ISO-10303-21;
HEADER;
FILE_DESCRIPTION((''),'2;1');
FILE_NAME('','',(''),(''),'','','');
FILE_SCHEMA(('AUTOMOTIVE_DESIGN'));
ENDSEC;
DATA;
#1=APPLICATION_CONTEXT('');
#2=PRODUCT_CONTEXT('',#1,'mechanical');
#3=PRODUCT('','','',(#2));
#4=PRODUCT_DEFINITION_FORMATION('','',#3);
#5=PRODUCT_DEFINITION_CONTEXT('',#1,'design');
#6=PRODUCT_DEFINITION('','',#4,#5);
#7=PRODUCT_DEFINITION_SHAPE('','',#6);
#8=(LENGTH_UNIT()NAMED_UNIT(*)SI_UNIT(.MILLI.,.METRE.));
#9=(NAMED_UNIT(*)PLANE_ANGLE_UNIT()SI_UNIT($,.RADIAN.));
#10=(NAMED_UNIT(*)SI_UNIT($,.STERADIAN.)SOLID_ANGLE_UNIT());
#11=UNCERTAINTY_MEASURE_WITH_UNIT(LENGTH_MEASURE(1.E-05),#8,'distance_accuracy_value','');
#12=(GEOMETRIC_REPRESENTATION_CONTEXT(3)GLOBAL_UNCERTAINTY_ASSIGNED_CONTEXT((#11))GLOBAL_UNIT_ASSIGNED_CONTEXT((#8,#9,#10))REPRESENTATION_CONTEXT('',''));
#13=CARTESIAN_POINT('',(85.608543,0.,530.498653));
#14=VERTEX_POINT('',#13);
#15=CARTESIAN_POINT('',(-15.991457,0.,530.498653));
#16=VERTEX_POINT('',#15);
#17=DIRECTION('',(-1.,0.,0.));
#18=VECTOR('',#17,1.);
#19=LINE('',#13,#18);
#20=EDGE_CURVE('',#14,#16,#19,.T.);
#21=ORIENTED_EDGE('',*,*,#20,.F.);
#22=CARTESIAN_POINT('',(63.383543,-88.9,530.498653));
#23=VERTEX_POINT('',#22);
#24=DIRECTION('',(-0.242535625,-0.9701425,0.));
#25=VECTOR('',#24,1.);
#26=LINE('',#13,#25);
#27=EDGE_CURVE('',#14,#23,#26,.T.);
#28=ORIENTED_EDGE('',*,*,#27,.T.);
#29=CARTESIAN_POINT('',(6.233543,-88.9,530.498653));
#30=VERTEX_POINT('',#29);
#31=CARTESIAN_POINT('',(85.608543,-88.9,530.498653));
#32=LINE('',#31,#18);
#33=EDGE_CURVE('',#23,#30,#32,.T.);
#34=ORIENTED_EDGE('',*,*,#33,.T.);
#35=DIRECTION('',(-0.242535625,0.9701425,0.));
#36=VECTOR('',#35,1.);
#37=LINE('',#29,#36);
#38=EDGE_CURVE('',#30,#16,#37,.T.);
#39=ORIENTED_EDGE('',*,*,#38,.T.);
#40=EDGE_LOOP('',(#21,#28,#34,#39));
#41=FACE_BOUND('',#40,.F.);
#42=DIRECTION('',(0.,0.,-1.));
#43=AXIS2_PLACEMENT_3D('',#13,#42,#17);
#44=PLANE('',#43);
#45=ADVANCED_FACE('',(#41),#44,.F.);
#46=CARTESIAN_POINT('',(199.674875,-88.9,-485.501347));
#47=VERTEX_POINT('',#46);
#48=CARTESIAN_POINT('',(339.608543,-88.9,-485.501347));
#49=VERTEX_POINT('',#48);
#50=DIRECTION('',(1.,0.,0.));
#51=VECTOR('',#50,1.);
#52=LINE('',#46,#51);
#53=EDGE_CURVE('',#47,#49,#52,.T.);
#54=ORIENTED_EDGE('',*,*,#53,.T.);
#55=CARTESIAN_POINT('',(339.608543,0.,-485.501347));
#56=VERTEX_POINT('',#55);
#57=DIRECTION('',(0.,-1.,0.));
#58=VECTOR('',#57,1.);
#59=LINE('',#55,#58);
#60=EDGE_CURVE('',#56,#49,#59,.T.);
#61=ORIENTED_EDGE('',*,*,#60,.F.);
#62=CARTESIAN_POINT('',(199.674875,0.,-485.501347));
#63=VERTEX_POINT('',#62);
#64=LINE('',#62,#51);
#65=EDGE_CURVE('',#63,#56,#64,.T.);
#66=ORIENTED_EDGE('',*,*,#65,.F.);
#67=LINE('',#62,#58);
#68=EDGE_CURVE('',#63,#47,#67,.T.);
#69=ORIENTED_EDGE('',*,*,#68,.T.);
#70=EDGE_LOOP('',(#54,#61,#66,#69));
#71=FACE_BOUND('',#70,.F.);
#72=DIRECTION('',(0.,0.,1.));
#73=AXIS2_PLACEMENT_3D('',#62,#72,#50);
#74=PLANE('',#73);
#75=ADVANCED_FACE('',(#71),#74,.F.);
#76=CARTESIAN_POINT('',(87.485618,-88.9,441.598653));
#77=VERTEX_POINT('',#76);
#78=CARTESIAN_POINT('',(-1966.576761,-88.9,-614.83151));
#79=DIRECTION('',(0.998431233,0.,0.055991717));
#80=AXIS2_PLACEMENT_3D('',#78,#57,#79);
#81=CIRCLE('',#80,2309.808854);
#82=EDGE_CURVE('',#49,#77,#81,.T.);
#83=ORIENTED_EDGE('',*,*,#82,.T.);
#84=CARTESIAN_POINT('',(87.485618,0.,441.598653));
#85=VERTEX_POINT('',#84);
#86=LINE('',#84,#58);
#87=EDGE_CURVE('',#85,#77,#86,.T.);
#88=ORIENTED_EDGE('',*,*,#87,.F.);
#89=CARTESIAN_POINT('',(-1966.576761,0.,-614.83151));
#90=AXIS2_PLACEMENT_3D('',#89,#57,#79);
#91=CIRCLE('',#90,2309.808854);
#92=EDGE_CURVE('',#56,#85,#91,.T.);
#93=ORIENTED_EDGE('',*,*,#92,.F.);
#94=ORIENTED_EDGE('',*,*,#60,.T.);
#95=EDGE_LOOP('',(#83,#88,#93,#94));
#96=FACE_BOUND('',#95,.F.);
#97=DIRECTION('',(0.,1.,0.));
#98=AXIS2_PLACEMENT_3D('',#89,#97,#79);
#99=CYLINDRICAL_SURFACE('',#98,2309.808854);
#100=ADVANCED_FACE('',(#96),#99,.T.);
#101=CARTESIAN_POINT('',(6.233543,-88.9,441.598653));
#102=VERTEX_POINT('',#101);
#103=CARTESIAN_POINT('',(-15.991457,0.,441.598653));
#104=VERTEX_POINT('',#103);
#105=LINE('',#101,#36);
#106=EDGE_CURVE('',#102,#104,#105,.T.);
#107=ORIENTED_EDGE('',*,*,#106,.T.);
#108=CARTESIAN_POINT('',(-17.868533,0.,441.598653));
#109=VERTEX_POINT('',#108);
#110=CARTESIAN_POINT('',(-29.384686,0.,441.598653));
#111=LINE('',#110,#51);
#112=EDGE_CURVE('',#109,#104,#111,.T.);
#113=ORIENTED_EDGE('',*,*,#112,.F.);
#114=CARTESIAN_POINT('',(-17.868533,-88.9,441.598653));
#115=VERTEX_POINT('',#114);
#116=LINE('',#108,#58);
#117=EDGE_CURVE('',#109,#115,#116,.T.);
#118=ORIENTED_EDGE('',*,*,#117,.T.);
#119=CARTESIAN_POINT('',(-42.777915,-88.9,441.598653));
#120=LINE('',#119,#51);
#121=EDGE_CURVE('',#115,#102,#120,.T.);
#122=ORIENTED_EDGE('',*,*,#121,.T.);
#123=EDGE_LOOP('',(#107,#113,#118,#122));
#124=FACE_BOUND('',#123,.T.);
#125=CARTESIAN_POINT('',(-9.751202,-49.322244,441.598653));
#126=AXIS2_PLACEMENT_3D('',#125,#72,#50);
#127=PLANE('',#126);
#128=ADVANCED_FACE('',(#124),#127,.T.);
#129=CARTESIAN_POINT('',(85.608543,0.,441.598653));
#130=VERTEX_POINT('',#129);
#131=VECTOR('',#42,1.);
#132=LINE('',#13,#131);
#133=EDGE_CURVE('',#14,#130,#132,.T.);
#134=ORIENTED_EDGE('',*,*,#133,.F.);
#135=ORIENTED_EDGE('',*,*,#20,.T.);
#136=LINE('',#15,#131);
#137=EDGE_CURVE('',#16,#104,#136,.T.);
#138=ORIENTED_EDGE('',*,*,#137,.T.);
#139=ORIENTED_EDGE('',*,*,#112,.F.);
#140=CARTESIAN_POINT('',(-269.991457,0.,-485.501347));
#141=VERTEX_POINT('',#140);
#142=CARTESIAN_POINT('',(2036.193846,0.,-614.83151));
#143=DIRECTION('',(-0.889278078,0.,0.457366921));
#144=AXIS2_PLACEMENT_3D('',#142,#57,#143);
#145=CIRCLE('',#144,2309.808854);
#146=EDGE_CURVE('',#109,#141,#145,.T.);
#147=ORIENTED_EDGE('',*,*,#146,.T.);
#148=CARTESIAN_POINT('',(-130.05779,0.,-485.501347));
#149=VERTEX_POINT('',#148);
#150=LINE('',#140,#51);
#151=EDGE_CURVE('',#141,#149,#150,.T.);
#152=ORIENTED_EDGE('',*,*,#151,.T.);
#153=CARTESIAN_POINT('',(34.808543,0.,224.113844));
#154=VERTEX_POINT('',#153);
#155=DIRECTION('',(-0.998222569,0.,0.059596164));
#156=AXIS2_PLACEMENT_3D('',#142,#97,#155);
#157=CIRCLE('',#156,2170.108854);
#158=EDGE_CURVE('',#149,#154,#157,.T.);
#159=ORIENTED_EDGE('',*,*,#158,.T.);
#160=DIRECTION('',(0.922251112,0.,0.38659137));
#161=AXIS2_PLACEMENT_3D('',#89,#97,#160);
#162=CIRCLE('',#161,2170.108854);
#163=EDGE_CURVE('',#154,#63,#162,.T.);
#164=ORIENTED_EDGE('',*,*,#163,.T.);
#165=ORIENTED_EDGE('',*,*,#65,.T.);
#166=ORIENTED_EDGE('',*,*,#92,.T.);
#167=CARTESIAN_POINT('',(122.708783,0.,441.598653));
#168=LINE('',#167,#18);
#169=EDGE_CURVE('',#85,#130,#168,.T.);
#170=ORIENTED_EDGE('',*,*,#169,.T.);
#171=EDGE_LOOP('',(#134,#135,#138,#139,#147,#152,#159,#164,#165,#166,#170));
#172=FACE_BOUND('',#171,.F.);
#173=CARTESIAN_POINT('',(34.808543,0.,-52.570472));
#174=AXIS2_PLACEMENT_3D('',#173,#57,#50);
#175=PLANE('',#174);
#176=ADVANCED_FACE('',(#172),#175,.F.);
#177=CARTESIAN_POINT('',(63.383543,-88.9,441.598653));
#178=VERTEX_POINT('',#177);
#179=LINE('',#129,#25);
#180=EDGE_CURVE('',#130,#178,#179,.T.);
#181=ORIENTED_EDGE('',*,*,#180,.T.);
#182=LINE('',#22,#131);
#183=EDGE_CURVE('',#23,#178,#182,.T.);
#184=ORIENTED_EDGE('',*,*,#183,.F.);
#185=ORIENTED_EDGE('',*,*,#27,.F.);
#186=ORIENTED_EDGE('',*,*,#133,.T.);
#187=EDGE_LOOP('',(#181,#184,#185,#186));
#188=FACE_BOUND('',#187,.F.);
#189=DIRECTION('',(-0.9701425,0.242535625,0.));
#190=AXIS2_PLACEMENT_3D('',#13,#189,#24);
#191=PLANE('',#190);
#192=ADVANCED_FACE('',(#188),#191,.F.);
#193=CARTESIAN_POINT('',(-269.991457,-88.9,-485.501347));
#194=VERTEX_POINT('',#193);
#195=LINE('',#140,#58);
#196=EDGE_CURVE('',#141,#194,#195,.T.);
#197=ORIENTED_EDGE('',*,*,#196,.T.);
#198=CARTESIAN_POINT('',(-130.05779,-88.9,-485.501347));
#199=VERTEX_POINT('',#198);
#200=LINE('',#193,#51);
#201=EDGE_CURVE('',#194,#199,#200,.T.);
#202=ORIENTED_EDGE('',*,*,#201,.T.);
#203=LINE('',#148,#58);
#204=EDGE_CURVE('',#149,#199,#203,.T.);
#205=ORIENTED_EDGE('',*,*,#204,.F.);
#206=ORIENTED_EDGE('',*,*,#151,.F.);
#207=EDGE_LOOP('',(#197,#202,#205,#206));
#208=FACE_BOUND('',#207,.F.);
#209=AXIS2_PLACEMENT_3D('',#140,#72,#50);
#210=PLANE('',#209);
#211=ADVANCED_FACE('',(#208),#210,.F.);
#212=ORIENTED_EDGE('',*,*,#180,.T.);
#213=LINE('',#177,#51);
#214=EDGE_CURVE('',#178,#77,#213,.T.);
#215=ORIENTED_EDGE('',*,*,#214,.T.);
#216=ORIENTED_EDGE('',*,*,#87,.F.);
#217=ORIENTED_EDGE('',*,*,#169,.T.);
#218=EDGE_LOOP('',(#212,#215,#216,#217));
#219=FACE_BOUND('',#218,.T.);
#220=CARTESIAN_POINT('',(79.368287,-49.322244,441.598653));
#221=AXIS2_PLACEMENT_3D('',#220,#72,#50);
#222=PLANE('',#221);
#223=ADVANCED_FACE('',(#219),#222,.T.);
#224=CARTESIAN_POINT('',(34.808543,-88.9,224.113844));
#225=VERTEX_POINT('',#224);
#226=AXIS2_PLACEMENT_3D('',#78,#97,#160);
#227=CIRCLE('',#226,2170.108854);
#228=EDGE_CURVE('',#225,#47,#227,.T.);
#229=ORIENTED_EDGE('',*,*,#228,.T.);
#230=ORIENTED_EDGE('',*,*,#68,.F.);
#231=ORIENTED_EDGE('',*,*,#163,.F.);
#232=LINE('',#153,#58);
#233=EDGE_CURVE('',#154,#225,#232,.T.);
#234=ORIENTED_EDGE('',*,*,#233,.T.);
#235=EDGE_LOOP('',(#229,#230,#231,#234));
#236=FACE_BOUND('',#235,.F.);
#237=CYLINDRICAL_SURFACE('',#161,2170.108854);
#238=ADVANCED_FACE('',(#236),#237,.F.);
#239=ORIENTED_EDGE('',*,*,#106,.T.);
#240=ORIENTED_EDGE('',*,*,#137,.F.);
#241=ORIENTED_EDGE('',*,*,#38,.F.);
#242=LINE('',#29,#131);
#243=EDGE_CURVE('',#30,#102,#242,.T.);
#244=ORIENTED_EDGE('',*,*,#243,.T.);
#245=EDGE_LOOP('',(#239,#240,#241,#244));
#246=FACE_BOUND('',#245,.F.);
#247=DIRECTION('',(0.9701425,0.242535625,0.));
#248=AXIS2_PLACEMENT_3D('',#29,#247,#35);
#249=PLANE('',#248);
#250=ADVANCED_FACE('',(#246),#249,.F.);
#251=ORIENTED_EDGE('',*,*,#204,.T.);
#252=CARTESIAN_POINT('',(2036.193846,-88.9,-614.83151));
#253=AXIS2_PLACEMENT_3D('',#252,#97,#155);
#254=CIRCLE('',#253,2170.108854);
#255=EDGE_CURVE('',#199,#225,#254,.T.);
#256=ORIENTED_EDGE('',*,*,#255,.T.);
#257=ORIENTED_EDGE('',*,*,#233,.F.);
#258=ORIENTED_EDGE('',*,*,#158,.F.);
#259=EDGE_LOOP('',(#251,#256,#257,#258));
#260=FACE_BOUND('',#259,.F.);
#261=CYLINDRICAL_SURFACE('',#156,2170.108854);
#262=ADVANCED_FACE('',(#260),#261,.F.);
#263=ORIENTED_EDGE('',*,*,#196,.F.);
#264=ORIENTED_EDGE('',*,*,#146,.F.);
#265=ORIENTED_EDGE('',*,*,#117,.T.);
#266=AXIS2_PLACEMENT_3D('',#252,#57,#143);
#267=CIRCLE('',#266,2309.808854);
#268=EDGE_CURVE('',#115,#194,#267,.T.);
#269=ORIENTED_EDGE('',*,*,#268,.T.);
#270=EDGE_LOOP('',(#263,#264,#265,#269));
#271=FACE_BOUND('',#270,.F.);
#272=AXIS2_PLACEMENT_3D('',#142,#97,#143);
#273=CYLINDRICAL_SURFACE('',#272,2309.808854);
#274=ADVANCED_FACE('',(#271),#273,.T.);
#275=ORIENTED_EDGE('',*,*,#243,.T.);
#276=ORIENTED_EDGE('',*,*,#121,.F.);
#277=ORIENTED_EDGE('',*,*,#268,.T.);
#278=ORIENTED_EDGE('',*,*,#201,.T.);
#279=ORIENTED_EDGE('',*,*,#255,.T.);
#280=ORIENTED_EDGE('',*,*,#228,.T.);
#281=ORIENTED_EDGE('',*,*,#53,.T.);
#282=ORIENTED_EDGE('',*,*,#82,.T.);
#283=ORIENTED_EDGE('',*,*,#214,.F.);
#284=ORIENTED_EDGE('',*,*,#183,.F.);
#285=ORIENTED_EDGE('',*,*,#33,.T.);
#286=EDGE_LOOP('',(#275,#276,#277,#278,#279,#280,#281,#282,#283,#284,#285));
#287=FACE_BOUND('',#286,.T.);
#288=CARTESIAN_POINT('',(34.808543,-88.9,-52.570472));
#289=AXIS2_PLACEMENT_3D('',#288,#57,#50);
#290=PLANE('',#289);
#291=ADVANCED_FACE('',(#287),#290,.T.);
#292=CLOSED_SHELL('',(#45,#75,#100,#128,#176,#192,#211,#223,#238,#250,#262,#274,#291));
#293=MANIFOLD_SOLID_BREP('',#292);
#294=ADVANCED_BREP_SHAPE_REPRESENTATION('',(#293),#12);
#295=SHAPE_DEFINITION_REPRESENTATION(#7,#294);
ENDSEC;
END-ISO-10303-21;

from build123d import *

# Parameters (mm, degrees)
F2_DEPTH = 88.9
F3_W     = 26.7864570916
F3_H     = 88.9
F4_DEPTH = 88.9


# Not quite as in the source:
# - a variable given as a bare number and used for a length is read in inches; the dataset says mm whatever the document's units were


with BuildPart() as f2:
    # F1 (on Front) → F2 (new body)
    with BuildSketch(Plane.XZ):
        with BuildLine():
            Line((85.6085425377, 530.4986528046), (34.8085425377, 530.4986528046))
            Line((34.8085425377, 530.4986528046), (-15.9914574623, 530.4986528046))
            Line((-15.9914574623, 530.4986528046), (-17.8685326312, 441.5986528046))
            ThreePointArc((-17.8685326312, 441.5986528046), (-192.6665275597, -8.6975481194), (-269.9914574623, -485.5013471954))
            Line((-269.9914574623, -485.5013471954), (-130.0577898718, -485.5013471954))
            ThreePointArc((-130.0577898718, -485.5013471954), (-77.615001681, -123.7260262863), (34.8085425377, 224.1138442826))
            ThreePointArc((34.8085425377, 224.1138442826), (147.2320867564, -123.7260262863), (199.6748749472, -485.5013471954))
            Line((199.6748749472, -485.5013471954), (339.6085425377, -485.5013471954))
            ThreePointArc((339.6085425377, -485.5013471954), (262.2836126351, -8.6975481194), (87.4856177066, 441.5986528046))
            Line((87.4856177066, 441.5986528046), (85.6085425377, 530.4986528046))
        make_face()
    extrude(amount=F2_DEPTH)

    # F3 (on face) → F4 (cut)
    with BuildSketch(Plane.XY.offset(530.4986528046)):
        Polygon((-15.9914574623, -88.9), (6.2335425377, -88.9), (-15.9914574623, 0), align=None)
        Polygon((85.6085425377, 0), (63.3835425377, -88.9), (85.6085425377, -88.9), align=None)
        Polygon((122.7087825537, 0), (85.6085425377, 0), (85.6085425377, -88.9), (129.0911585093, -88.9), align=None)
        with Locations((-29.3846860081, -44.45)):
            Rectangle(F3_W, F3_H)
    extrude(amount=-F4_DEPTH, mode=Mode.SUBTRACT)


solid = f2.part
